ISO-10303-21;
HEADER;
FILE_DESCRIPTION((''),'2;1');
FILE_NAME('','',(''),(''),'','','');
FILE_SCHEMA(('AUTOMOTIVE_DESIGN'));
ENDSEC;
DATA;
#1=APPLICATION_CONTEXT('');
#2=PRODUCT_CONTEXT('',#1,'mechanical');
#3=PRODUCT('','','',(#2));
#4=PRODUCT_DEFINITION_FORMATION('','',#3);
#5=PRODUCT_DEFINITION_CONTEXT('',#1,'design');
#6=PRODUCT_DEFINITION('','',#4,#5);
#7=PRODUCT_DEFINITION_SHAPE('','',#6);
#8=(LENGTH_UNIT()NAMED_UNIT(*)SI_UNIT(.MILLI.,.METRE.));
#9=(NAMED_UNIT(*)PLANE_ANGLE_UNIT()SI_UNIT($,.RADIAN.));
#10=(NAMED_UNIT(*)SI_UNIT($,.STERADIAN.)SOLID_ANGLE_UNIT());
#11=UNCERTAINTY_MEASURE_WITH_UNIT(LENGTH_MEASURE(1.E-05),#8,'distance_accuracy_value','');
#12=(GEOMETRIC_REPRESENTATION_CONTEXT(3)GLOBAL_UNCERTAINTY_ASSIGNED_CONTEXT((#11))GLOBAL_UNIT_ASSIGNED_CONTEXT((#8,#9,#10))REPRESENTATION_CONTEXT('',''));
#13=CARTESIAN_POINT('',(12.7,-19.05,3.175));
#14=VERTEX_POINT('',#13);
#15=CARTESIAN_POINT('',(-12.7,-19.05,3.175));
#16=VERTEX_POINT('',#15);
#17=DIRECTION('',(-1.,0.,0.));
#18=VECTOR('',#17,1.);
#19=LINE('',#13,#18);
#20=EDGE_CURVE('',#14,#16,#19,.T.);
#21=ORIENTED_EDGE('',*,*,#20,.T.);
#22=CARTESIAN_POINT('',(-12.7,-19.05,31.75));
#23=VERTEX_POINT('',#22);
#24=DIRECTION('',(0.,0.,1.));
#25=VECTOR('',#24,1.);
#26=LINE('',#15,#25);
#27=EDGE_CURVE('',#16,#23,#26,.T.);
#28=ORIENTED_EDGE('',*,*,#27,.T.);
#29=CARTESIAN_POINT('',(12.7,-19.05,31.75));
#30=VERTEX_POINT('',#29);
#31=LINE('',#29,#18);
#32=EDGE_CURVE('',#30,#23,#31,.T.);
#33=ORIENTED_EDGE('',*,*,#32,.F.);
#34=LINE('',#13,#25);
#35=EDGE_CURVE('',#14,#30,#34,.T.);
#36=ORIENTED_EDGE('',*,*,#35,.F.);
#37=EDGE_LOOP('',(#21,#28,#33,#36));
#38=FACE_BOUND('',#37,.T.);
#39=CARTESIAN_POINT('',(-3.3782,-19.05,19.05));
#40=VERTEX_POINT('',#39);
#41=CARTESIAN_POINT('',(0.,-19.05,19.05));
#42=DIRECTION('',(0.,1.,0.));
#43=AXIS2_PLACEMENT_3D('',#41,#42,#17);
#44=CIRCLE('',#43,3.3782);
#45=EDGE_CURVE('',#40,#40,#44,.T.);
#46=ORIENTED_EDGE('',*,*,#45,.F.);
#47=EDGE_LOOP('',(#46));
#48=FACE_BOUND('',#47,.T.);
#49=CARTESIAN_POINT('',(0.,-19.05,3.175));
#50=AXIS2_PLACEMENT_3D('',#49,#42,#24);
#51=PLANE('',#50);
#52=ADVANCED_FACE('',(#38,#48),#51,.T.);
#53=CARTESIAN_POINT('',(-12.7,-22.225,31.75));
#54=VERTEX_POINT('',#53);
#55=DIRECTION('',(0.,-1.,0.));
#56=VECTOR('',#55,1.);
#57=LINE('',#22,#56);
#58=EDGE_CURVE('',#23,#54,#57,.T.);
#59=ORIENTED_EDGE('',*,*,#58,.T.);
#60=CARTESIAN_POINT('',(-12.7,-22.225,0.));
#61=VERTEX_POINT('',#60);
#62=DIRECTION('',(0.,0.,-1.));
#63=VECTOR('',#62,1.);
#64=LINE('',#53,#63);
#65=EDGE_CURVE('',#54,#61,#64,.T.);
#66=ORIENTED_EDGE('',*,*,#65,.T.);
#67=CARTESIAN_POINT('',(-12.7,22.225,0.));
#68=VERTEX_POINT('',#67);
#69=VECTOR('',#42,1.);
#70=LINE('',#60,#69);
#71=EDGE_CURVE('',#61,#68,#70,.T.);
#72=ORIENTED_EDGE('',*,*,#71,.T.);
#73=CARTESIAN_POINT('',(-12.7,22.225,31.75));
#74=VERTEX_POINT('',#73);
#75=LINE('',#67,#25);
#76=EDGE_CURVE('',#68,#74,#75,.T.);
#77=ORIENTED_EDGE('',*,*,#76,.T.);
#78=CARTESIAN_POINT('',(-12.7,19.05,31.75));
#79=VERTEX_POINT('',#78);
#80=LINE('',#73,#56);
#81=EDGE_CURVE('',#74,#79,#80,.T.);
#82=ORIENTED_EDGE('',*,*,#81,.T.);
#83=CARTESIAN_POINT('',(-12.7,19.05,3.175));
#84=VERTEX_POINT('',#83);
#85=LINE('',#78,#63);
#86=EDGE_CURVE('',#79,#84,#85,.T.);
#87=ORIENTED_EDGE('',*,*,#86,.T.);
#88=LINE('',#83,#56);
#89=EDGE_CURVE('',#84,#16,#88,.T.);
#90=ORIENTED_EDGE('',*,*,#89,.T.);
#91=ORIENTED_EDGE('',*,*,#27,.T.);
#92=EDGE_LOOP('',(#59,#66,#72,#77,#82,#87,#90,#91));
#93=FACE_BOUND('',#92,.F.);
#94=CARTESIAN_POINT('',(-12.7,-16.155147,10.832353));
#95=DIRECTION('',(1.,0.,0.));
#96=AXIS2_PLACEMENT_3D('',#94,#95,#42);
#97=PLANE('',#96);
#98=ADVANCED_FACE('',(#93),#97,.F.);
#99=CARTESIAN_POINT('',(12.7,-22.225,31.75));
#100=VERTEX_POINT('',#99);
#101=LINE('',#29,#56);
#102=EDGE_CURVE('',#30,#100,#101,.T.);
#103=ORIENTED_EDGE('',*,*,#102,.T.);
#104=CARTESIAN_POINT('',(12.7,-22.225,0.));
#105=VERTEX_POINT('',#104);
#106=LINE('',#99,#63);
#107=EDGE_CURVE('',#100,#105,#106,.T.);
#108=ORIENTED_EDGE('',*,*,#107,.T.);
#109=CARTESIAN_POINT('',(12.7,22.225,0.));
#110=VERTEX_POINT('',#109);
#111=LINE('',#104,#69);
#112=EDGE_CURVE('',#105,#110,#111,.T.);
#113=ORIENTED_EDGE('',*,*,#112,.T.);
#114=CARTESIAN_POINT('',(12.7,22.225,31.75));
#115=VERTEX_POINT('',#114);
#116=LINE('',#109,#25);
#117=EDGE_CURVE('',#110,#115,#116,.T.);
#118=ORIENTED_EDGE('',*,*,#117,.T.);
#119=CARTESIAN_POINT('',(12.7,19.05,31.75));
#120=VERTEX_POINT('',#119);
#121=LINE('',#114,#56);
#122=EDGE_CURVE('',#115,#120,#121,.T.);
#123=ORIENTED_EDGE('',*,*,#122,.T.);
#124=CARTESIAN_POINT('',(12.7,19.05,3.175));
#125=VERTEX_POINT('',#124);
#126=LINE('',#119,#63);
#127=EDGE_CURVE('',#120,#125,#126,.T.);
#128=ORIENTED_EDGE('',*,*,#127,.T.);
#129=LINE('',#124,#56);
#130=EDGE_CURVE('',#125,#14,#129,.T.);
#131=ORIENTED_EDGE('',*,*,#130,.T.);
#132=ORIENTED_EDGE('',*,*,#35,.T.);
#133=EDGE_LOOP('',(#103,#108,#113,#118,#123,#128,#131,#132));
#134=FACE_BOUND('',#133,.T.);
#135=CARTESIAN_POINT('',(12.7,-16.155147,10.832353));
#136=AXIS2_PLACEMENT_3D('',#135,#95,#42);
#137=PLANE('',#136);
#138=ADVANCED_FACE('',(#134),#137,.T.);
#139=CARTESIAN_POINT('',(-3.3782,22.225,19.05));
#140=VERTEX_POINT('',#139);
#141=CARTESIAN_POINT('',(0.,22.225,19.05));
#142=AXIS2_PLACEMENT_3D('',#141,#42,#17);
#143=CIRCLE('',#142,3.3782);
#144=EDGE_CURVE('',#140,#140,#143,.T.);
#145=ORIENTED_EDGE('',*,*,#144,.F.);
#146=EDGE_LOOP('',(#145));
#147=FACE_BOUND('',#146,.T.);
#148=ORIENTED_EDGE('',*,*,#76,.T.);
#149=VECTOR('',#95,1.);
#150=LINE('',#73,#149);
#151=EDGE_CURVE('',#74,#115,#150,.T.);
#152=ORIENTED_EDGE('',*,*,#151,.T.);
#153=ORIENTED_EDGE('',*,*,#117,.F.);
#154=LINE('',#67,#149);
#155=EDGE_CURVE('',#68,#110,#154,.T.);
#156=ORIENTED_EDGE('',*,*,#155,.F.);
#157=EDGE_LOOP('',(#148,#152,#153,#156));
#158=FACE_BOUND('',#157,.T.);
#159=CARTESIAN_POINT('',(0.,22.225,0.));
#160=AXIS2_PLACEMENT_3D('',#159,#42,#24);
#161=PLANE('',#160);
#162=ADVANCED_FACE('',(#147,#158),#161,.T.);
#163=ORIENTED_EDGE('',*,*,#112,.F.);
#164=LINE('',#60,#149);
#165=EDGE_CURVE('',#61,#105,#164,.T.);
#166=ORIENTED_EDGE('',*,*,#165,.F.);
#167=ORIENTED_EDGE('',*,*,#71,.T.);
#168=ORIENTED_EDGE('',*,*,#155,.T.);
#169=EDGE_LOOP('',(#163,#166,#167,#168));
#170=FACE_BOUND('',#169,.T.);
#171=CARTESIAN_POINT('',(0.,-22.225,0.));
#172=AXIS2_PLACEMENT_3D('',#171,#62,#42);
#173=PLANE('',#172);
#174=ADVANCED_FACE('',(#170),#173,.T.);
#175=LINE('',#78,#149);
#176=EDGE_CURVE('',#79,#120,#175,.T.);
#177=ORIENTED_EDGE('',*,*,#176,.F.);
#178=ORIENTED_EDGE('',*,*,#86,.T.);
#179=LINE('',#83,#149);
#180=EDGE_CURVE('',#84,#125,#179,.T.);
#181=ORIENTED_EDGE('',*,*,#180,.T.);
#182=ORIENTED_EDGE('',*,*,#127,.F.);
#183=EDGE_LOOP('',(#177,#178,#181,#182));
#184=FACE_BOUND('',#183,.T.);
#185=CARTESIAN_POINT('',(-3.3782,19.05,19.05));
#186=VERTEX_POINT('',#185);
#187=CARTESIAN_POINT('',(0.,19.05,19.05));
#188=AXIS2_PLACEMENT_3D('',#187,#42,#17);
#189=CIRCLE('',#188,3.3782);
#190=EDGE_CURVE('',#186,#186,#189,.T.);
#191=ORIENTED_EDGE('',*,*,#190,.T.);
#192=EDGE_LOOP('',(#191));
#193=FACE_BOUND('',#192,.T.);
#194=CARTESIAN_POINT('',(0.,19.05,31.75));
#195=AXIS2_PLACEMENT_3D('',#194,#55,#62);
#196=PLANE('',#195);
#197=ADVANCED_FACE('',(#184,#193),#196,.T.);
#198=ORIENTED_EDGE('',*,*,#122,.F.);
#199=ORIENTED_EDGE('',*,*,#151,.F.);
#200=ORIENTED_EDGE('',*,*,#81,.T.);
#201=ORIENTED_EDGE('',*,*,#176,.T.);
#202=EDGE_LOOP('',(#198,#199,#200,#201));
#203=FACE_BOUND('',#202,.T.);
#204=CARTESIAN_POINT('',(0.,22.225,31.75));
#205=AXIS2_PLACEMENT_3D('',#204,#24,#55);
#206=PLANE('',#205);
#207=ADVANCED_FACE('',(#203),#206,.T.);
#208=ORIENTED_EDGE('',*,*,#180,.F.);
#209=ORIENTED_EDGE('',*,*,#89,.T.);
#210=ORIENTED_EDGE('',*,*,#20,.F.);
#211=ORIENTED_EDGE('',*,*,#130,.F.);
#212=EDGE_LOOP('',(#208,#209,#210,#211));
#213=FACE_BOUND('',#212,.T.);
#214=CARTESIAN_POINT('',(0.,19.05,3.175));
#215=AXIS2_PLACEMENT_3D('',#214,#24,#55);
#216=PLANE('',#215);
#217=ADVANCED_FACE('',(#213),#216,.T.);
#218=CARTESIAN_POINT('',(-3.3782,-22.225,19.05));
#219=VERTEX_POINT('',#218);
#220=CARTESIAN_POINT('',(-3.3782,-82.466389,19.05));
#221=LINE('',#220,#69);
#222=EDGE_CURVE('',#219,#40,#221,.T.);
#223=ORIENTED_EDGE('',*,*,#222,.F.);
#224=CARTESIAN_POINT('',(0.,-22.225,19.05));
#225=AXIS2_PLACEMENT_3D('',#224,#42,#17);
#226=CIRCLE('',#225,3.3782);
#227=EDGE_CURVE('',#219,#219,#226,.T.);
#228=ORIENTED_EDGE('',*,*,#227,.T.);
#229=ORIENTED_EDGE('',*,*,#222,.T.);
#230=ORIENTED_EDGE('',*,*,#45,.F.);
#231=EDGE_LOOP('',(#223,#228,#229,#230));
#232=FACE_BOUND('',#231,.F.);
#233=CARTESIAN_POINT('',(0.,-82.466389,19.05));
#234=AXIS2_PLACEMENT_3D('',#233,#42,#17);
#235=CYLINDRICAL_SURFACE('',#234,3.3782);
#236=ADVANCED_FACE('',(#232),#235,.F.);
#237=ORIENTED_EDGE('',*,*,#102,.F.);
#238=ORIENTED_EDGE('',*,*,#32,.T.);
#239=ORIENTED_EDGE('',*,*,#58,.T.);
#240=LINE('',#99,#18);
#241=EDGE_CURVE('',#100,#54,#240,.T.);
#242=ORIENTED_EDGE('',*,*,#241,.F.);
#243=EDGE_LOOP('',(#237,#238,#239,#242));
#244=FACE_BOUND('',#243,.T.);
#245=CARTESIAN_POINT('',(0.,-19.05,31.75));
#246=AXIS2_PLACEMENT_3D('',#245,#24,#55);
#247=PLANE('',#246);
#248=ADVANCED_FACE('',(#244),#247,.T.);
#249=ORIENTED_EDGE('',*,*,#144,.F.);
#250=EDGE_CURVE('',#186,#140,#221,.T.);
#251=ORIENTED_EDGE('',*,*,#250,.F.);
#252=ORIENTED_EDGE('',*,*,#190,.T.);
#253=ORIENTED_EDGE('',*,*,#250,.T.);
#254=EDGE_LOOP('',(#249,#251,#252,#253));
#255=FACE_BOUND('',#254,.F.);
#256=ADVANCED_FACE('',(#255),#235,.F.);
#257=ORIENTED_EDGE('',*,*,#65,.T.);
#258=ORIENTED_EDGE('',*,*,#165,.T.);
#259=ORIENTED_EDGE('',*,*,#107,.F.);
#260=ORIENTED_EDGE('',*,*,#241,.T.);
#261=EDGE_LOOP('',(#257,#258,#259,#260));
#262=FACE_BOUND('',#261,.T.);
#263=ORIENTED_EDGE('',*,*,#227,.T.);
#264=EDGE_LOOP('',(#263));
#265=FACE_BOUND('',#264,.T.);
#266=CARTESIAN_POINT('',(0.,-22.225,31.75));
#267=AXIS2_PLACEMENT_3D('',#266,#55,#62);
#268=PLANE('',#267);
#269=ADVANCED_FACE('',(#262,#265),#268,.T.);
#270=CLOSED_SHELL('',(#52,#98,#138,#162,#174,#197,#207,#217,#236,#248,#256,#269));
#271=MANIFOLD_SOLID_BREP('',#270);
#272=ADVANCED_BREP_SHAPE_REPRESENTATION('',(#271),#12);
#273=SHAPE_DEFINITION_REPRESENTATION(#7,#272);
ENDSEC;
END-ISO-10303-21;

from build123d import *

# Parameters (mm, degrees)
F1_DEPTH = 12.7
F3_D     = 6.7564


with BuildPart() as f1:
    # F0 (on Right) → F1 (new body, symmetric)
    with BuildSketch(Plane.YZ):
        Polygon((-22.225, 31.75), (-22.225, 0), (0, 0), (0, 3.175), (-19.05, 3.175), (-19.05, 31.75), align=None)
        Polygon((0, 3.175), (0, 0), (22.225, 0), (22.225, 31.75), (19.05, 31.75), (19.05, 3.175), align=None)
    extrude(amount=F1_DEPTH, both=True)

    # F3 (through all)
    with Locations(Plane.XZ.offset(22.225)):
        with Locations((0, 19.05)):
            Hole(F3_D / 2)


solid = f1.part
